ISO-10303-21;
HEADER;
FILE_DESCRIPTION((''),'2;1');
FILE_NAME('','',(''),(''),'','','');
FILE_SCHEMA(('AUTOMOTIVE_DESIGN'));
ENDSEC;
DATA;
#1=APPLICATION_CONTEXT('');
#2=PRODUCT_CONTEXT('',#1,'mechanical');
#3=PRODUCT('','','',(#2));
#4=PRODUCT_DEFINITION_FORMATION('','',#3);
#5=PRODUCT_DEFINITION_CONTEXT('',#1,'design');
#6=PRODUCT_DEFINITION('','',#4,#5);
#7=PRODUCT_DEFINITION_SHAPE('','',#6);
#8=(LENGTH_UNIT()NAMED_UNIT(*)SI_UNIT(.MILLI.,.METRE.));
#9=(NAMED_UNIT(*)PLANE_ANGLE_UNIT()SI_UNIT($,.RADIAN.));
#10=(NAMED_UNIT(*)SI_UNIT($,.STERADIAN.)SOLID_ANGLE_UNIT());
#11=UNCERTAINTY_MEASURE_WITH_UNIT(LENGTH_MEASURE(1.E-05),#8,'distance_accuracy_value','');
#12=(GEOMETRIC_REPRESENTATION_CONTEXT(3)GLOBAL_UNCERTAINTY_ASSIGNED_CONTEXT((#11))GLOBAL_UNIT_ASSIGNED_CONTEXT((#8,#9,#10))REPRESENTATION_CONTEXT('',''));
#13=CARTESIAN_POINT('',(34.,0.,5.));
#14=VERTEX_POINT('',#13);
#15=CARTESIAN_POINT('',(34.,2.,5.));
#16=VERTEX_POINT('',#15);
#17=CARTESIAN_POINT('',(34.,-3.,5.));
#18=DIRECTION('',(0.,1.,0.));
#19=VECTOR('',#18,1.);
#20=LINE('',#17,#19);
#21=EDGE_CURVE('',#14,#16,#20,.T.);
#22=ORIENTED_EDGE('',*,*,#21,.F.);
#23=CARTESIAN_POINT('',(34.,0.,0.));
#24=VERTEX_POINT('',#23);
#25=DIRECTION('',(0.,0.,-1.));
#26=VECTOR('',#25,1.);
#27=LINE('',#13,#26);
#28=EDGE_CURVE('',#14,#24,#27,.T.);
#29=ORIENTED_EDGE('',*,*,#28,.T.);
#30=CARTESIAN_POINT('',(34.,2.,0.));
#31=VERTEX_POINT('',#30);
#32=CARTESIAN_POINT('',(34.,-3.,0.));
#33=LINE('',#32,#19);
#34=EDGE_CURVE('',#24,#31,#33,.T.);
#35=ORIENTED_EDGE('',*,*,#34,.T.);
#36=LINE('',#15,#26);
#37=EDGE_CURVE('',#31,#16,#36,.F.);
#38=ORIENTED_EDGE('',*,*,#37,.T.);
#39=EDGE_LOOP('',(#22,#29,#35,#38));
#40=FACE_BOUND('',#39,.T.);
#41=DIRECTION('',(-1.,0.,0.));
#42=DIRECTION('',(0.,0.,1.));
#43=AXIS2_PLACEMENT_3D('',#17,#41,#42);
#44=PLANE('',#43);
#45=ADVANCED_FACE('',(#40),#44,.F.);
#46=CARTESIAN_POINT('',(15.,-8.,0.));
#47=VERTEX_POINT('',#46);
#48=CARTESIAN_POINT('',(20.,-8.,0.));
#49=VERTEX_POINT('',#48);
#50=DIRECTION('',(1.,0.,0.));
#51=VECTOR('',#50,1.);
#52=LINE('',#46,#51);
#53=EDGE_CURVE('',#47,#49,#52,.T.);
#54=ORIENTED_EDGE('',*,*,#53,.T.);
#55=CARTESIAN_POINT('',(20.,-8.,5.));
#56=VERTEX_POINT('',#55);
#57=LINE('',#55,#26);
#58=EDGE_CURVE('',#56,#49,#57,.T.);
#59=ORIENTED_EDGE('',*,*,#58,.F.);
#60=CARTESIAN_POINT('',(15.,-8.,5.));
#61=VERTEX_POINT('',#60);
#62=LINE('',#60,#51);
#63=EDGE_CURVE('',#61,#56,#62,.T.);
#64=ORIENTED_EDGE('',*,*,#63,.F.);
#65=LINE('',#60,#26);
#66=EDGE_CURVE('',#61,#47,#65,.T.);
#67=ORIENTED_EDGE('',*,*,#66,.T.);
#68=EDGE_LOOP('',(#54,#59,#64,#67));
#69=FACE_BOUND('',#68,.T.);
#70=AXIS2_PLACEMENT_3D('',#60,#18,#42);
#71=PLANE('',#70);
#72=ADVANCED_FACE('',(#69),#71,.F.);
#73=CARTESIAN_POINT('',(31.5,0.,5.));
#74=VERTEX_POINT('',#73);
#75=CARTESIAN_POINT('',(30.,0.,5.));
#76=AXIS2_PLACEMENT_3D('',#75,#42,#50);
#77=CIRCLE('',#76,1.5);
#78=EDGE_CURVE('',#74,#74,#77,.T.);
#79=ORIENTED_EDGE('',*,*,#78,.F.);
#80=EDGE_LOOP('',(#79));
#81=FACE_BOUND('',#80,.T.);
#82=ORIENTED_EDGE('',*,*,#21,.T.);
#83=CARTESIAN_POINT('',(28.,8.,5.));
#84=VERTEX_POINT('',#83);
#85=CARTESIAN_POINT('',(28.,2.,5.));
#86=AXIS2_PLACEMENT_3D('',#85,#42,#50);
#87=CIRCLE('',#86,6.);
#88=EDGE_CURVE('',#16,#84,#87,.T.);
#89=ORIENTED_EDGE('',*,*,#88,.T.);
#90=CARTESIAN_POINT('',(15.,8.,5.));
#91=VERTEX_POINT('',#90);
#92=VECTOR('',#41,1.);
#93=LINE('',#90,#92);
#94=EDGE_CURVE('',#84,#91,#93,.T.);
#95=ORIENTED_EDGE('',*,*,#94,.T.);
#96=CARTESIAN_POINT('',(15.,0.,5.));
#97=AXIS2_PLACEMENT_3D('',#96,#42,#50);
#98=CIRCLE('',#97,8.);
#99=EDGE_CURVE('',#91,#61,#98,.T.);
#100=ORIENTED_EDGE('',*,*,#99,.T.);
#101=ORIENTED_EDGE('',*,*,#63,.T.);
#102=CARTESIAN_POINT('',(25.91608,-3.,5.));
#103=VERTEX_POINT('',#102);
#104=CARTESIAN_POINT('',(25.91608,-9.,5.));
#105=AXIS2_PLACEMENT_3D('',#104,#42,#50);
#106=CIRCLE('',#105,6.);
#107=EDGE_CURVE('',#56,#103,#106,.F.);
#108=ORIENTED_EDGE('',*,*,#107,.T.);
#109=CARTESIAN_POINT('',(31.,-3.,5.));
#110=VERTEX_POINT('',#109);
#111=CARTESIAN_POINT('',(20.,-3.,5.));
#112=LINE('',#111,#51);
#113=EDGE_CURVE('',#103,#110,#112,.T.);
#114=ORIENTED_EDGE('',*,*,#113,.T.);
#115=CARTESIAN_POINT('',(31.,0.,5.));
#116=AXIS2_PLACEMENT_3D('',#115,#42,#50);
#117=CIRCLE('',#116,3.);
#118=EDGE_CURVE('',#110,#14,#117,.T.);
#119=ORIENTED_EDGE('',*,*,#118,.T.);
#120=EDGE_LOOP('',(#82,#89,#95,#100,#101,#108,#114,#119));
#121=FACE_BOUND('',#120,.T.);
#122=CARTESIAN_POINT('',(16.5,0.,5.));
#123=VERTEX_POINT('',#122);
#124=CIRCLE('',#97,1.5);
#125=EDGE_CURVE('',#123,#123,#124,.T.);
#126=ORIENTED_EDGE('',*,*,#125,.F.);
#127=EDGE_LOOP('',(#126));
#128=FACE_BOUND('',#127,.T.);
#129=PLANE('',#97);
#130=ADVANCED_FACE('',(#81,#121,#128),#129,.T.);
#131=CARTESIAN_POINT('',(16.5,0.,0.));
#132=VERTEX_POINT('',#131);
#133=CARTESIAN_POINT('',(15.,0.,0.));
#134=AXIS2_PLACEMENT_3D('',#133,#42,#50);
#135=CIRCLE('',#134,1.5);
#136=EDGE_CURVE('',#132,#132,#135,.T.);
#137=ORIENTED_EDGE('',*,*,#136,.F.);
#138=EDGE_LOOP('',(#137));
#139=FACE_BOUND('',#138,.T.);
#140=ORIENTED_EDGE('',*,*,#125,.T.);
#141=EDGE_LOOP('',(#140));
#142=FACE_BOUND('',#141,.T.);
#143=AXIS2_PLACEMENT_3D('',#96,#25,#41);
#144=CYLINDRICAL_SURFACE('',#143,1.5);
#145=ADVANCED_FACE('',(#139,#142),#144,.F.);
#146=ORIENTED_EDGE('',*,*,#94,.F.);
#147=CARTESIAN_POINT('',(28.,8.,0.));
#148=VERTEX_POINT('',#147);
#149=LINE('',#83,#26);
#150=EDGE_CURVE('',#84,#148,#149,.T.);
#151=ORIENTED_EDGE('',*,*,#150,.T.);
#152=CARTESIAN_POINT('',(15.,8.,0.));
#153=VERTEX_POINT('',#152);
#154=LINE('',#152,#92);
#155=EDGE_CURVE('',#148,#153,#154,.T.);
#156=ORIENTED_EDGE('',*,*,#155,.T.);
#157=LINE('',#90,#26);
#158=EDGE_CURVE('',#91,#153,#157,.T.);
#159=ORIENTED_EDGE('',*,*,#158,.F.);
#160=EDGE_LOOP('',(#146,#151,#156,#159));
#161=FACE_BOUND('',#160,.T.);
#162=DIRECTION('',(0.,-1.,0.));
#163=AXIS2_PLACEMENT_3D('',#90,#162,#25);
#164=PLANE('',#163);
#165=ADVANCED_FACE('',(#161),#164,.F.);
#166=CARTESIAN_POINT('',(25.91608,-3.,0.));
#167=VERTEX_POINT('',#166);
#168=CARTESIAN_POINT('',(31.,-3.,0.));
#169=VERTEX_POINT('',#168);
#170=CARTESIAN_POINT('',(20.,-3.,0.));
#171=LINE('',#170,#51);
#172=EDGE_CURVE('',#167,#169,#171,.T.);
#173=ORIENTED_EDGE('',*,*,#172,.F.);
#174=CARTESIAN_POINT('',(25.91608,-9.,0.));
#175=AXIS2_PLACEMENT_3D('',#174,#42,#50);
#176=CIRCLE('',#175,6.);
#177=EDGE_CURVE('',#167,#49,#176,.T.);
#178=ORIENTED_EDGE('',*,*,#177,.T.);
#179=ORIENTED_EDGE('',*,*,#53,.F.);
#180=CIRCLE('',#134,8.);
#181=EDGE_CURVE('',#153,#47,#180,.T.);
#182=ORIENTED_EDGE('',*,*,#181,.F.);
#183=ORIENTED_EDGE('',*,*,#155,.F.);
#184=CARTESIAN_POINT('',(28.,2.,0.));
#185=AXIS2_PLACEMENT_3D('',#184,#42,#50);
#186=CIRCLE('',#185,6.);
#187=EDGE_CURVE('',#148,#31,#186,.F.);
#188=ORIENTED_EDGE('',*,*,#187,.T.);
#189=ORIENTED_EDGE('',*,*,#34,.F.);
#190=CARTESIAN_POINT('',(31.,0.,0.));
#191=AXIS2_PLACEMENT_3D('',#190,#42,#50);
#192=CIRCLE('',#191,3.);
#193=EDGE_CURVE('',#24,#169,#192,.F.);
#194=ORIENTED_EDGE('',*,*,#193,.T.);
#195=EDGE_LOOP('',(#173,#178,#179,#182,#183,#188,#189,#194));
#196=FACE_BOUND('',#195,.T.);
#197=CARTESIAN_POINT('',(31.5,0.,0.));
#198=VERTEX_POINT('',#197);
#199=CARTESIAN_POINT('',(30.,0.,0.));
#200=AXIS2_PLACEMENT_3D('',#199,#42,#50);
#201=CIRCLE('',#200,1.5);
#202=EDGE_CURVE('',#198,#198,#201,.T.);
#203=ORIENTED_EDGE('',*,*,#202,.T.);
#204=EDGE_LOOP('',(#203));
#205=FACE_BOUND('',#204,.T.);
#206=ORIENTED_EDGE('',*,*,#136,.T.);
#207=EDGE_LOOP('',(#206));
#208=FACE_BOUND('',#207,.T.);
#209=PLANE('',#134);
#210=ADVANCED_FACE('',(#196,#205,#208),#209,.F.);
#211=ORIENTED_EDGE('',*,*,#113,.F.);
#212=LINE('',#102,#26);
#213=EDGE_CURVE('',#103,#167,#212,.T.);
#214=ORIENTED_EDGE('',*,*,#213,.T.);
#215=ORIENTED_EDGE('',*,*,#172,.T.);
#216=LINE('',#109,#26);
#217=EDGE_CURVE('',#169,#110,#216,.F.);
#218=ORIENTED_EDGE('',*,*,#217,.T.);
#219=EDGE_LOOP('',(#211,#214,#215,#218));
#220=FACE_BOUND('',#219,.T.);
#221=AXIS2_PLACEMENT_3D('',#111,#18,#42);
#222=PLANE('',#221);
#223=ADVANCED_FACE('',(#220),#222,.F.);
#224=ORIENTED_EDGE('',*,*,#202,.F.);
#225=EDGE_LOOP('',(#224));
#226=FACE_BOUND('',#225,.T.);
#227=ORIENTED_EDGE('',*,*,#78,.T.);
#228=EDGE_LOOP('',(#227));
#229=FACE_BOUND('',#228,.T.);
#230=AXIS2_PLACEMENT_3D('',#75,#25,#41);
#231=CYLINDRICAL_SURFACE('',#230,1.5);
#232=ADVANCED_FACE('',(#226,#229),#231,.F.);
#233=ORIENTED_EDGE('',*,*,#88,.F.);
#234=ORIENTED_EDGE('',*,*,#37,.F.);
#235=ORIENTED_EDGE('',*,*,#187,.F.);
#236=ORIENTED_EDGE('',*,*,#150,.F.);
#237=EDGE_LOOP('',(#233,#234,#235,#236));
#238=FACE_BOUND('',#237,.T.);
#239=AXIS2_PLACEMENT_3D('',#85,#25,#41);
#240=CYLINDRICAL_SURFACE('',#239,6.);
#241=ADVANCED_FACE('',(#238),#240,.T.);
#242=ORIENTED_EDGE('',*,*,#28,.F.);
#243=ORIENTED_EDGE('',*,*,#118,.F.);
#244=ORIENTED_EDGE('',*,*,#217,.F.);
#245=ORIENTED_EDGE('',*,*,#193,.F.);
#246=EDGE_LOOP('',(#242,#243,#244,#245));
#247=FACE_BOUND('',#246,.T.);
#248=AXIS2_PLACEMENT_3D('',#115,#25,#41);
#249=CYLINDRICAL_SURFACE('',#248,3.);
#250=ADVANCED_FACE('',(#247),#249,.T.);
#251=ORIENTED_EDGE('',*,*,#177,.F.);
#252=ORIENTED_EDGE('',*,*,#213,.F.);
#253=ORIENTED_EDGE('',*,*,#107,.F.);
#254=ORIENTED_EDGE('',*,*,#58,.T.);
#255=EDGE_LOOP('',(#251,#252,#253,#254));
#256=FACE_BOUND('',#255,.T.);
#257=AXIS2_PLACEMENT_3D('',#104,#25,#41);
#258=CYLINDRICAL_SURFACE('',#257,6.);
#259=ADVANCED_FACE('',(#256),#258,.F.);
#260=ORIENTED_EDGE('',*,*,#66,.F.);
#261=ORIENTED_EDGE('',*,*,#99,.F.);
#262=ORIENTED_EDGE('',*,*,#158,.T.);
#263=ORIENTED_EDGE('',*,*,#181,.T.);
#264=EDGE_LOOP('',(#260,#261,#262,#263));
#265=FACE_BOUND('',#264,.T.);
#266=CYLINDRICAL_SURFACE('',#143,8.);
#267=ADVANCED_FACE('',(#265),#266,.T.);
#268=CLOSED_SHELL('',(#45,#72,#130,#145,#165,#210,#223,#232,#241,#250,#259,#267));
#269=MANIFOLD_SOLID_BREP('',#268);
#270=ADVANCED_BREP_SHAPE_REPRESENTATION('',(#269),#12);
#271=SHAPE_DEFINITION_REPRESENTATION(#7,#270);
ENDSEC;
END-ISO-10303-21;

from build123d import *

# Parameters (mm, degrees)
ESQUISSE1_R        = 1.5
BOSS_EXTRU_1_DEPTH = 5
CONG_1_R           = 6
CONG_2_R           = 3


with BuildPart() as part:
    # Esquisse1 → Boss.-Extru.1 (new body)
    with BuildSketch(Plane.XY):
        with BuildLine():
            Line((20, -3), (34, -3))
            Line((34, -3), (34, 8))
            Line((34, 8), (15, 8))
            ThreePointArc((15, 8), (7, 0), (15, -8))
            Line((15, -8), (20, -8))
            Line((20, -8), (20, -3))
        make_face()
        with Locations((15, 0)):
            Circle(ESQUISSE1_R, mode=Mode.SUBTRACT)
        with Locations((30, 0)):
            Circle(ESQUISSE1_R, mode=Mode.SUBTRACT)
    extrude(amount=BOSS_EXTRU_1_DEPTH)

    # Congé1
    # the kernel refuses this fillet: 6 mm, written as the material it adds along each edge
    with BuildSketch(Plane(origin=(20, -3, 0), x_dir=(-2.958065230920737e-05, -0.9999999995624925, 0), z_dir=(0, 0, 1))) as cong_1_piece_1:
        with BuildLine():
            CenterArc((5.999675, 5.916130485), CONG_1_R, 180.001694847, 80.407142396)
            Line((-0.000324998, 5.915953002), (-0.120324998, 5.915949452))
            ThreePointArc((-0.120324998, 5.915949452), (-0.120087499, 2.957972953), (-0.12, -3.55e-06))
            Line((-0.12, -3.55e-06), (3.55e-06, -0.12))
            ThreePointArc((3.55e-06, -0.12), (2.49999105, -0.119926049), (4.979981005, -0.11832261))
            Line((4.979981005, -0.11832261), (4.999975005, 0))
        make_face()
    extrude(amount=5)
    # the kernel refuses this fillet: 6 mm, written as the material it takes off along each edge
    with BuildSketch(Plane(origin=(34, 8, -14.999625005), x_dir=(-0.9999999996874845, 2.500062500775405e-05, 0), z_dir=(0, 0, 1))) as cong_1_2_piece_1:
        with BuildLine():
            CenterArc((5.999699998, 5.999999998), CONG_1_R, 180.00143243, 90)
            Line((-0.0003, 5.999849994), (-0.1203, 5.999846994))
            ThreePointArc((-0.1203, 5.999846994), (-0.120075, 2.999921999), (-0.12, -3e-06))
            Line((-0.12, -3e-06), (3e-06, -0.12))
            ThreePointArc((3e-06, -0.12), (2.999927999, -0.119925), (5.999853002, -0.12))
            Line((5.999853002, -0.12), (5.999850002, 0))
        make_face()
    extrude(amount=34.999250009, mode=Mode.SUBTRACT)
    with BuildSketch(Plane(origin=(20, -22.789882526, 5), x_dir=(2.9580652309207366e-05, 0, -0.9999999995624925), z_dir=(0, 1, 0))) as cong_1_2_piece_2:
        with BuildLine():
            CenterArc((5.999675, 5.916130485), CONG_1_R, 180.001694847, 80.407142396)
            Line((-0.000324998, 5.915953002), (-0.120324998, 5.915949452))
            ThreePointArc((-0.120324998, 5.915949452), (-0.120087499, 2.957972953), (-0.12, -3.55e-06))
            Line((-0.12, -3.55e-06), (3.55e-06, -0.12))
            ThreePointArc((3.55e-06, -0.12), (2.49999105, -0.119926049), (4.979981005, -0.11832261))
            Line((4.979981005, -0.11832261), (4.999975005, 0))
        make_face()
    extrude(amount=29.580664771, mode=Mode.SUBTRACT)
    with BuildSketch(Plane(origin=(20, -22.789882526, 0), x_dir=(2.9580652309207366e-05, 0, 0.9999999995624925), z_dir=(0, 1, 0))) as cong_1_2_piece_3:
        with BuildLine():
            CenterArc((5.999675, -5.916130485), CONG_1_R, 99.591162758, 80.407142396)
            Line((-0.000324998, -5.915953002), (-0.120324998, -5.915949452))
            ThreePointArc((-0.120324998, -5.915949452), (-0.120087499, -2.957972953), (-0.12, 3.55e-06))
            Line((-0.12, 3.55e-06), (3.55e-06, 0.12))
            ThreePointArc((3.55e-06, 0.12), (2.49999105, 0.119926049), (4.979981005, 0.11832261))
            Line((4.979981005, 0.11832261), (4.999975005, 0))
        make_face()
    extrude(amount=29.580664771, mode=Mode.SUBTRACT)

    # Congé2
    cong_2_edges = [part.edges().sort_by_distance(p)[0] for p in [
        (34, -3, 2.5),
    ]]
    fillet(cong_2_edges, radius=CONG_2_R)


solid = part.part
